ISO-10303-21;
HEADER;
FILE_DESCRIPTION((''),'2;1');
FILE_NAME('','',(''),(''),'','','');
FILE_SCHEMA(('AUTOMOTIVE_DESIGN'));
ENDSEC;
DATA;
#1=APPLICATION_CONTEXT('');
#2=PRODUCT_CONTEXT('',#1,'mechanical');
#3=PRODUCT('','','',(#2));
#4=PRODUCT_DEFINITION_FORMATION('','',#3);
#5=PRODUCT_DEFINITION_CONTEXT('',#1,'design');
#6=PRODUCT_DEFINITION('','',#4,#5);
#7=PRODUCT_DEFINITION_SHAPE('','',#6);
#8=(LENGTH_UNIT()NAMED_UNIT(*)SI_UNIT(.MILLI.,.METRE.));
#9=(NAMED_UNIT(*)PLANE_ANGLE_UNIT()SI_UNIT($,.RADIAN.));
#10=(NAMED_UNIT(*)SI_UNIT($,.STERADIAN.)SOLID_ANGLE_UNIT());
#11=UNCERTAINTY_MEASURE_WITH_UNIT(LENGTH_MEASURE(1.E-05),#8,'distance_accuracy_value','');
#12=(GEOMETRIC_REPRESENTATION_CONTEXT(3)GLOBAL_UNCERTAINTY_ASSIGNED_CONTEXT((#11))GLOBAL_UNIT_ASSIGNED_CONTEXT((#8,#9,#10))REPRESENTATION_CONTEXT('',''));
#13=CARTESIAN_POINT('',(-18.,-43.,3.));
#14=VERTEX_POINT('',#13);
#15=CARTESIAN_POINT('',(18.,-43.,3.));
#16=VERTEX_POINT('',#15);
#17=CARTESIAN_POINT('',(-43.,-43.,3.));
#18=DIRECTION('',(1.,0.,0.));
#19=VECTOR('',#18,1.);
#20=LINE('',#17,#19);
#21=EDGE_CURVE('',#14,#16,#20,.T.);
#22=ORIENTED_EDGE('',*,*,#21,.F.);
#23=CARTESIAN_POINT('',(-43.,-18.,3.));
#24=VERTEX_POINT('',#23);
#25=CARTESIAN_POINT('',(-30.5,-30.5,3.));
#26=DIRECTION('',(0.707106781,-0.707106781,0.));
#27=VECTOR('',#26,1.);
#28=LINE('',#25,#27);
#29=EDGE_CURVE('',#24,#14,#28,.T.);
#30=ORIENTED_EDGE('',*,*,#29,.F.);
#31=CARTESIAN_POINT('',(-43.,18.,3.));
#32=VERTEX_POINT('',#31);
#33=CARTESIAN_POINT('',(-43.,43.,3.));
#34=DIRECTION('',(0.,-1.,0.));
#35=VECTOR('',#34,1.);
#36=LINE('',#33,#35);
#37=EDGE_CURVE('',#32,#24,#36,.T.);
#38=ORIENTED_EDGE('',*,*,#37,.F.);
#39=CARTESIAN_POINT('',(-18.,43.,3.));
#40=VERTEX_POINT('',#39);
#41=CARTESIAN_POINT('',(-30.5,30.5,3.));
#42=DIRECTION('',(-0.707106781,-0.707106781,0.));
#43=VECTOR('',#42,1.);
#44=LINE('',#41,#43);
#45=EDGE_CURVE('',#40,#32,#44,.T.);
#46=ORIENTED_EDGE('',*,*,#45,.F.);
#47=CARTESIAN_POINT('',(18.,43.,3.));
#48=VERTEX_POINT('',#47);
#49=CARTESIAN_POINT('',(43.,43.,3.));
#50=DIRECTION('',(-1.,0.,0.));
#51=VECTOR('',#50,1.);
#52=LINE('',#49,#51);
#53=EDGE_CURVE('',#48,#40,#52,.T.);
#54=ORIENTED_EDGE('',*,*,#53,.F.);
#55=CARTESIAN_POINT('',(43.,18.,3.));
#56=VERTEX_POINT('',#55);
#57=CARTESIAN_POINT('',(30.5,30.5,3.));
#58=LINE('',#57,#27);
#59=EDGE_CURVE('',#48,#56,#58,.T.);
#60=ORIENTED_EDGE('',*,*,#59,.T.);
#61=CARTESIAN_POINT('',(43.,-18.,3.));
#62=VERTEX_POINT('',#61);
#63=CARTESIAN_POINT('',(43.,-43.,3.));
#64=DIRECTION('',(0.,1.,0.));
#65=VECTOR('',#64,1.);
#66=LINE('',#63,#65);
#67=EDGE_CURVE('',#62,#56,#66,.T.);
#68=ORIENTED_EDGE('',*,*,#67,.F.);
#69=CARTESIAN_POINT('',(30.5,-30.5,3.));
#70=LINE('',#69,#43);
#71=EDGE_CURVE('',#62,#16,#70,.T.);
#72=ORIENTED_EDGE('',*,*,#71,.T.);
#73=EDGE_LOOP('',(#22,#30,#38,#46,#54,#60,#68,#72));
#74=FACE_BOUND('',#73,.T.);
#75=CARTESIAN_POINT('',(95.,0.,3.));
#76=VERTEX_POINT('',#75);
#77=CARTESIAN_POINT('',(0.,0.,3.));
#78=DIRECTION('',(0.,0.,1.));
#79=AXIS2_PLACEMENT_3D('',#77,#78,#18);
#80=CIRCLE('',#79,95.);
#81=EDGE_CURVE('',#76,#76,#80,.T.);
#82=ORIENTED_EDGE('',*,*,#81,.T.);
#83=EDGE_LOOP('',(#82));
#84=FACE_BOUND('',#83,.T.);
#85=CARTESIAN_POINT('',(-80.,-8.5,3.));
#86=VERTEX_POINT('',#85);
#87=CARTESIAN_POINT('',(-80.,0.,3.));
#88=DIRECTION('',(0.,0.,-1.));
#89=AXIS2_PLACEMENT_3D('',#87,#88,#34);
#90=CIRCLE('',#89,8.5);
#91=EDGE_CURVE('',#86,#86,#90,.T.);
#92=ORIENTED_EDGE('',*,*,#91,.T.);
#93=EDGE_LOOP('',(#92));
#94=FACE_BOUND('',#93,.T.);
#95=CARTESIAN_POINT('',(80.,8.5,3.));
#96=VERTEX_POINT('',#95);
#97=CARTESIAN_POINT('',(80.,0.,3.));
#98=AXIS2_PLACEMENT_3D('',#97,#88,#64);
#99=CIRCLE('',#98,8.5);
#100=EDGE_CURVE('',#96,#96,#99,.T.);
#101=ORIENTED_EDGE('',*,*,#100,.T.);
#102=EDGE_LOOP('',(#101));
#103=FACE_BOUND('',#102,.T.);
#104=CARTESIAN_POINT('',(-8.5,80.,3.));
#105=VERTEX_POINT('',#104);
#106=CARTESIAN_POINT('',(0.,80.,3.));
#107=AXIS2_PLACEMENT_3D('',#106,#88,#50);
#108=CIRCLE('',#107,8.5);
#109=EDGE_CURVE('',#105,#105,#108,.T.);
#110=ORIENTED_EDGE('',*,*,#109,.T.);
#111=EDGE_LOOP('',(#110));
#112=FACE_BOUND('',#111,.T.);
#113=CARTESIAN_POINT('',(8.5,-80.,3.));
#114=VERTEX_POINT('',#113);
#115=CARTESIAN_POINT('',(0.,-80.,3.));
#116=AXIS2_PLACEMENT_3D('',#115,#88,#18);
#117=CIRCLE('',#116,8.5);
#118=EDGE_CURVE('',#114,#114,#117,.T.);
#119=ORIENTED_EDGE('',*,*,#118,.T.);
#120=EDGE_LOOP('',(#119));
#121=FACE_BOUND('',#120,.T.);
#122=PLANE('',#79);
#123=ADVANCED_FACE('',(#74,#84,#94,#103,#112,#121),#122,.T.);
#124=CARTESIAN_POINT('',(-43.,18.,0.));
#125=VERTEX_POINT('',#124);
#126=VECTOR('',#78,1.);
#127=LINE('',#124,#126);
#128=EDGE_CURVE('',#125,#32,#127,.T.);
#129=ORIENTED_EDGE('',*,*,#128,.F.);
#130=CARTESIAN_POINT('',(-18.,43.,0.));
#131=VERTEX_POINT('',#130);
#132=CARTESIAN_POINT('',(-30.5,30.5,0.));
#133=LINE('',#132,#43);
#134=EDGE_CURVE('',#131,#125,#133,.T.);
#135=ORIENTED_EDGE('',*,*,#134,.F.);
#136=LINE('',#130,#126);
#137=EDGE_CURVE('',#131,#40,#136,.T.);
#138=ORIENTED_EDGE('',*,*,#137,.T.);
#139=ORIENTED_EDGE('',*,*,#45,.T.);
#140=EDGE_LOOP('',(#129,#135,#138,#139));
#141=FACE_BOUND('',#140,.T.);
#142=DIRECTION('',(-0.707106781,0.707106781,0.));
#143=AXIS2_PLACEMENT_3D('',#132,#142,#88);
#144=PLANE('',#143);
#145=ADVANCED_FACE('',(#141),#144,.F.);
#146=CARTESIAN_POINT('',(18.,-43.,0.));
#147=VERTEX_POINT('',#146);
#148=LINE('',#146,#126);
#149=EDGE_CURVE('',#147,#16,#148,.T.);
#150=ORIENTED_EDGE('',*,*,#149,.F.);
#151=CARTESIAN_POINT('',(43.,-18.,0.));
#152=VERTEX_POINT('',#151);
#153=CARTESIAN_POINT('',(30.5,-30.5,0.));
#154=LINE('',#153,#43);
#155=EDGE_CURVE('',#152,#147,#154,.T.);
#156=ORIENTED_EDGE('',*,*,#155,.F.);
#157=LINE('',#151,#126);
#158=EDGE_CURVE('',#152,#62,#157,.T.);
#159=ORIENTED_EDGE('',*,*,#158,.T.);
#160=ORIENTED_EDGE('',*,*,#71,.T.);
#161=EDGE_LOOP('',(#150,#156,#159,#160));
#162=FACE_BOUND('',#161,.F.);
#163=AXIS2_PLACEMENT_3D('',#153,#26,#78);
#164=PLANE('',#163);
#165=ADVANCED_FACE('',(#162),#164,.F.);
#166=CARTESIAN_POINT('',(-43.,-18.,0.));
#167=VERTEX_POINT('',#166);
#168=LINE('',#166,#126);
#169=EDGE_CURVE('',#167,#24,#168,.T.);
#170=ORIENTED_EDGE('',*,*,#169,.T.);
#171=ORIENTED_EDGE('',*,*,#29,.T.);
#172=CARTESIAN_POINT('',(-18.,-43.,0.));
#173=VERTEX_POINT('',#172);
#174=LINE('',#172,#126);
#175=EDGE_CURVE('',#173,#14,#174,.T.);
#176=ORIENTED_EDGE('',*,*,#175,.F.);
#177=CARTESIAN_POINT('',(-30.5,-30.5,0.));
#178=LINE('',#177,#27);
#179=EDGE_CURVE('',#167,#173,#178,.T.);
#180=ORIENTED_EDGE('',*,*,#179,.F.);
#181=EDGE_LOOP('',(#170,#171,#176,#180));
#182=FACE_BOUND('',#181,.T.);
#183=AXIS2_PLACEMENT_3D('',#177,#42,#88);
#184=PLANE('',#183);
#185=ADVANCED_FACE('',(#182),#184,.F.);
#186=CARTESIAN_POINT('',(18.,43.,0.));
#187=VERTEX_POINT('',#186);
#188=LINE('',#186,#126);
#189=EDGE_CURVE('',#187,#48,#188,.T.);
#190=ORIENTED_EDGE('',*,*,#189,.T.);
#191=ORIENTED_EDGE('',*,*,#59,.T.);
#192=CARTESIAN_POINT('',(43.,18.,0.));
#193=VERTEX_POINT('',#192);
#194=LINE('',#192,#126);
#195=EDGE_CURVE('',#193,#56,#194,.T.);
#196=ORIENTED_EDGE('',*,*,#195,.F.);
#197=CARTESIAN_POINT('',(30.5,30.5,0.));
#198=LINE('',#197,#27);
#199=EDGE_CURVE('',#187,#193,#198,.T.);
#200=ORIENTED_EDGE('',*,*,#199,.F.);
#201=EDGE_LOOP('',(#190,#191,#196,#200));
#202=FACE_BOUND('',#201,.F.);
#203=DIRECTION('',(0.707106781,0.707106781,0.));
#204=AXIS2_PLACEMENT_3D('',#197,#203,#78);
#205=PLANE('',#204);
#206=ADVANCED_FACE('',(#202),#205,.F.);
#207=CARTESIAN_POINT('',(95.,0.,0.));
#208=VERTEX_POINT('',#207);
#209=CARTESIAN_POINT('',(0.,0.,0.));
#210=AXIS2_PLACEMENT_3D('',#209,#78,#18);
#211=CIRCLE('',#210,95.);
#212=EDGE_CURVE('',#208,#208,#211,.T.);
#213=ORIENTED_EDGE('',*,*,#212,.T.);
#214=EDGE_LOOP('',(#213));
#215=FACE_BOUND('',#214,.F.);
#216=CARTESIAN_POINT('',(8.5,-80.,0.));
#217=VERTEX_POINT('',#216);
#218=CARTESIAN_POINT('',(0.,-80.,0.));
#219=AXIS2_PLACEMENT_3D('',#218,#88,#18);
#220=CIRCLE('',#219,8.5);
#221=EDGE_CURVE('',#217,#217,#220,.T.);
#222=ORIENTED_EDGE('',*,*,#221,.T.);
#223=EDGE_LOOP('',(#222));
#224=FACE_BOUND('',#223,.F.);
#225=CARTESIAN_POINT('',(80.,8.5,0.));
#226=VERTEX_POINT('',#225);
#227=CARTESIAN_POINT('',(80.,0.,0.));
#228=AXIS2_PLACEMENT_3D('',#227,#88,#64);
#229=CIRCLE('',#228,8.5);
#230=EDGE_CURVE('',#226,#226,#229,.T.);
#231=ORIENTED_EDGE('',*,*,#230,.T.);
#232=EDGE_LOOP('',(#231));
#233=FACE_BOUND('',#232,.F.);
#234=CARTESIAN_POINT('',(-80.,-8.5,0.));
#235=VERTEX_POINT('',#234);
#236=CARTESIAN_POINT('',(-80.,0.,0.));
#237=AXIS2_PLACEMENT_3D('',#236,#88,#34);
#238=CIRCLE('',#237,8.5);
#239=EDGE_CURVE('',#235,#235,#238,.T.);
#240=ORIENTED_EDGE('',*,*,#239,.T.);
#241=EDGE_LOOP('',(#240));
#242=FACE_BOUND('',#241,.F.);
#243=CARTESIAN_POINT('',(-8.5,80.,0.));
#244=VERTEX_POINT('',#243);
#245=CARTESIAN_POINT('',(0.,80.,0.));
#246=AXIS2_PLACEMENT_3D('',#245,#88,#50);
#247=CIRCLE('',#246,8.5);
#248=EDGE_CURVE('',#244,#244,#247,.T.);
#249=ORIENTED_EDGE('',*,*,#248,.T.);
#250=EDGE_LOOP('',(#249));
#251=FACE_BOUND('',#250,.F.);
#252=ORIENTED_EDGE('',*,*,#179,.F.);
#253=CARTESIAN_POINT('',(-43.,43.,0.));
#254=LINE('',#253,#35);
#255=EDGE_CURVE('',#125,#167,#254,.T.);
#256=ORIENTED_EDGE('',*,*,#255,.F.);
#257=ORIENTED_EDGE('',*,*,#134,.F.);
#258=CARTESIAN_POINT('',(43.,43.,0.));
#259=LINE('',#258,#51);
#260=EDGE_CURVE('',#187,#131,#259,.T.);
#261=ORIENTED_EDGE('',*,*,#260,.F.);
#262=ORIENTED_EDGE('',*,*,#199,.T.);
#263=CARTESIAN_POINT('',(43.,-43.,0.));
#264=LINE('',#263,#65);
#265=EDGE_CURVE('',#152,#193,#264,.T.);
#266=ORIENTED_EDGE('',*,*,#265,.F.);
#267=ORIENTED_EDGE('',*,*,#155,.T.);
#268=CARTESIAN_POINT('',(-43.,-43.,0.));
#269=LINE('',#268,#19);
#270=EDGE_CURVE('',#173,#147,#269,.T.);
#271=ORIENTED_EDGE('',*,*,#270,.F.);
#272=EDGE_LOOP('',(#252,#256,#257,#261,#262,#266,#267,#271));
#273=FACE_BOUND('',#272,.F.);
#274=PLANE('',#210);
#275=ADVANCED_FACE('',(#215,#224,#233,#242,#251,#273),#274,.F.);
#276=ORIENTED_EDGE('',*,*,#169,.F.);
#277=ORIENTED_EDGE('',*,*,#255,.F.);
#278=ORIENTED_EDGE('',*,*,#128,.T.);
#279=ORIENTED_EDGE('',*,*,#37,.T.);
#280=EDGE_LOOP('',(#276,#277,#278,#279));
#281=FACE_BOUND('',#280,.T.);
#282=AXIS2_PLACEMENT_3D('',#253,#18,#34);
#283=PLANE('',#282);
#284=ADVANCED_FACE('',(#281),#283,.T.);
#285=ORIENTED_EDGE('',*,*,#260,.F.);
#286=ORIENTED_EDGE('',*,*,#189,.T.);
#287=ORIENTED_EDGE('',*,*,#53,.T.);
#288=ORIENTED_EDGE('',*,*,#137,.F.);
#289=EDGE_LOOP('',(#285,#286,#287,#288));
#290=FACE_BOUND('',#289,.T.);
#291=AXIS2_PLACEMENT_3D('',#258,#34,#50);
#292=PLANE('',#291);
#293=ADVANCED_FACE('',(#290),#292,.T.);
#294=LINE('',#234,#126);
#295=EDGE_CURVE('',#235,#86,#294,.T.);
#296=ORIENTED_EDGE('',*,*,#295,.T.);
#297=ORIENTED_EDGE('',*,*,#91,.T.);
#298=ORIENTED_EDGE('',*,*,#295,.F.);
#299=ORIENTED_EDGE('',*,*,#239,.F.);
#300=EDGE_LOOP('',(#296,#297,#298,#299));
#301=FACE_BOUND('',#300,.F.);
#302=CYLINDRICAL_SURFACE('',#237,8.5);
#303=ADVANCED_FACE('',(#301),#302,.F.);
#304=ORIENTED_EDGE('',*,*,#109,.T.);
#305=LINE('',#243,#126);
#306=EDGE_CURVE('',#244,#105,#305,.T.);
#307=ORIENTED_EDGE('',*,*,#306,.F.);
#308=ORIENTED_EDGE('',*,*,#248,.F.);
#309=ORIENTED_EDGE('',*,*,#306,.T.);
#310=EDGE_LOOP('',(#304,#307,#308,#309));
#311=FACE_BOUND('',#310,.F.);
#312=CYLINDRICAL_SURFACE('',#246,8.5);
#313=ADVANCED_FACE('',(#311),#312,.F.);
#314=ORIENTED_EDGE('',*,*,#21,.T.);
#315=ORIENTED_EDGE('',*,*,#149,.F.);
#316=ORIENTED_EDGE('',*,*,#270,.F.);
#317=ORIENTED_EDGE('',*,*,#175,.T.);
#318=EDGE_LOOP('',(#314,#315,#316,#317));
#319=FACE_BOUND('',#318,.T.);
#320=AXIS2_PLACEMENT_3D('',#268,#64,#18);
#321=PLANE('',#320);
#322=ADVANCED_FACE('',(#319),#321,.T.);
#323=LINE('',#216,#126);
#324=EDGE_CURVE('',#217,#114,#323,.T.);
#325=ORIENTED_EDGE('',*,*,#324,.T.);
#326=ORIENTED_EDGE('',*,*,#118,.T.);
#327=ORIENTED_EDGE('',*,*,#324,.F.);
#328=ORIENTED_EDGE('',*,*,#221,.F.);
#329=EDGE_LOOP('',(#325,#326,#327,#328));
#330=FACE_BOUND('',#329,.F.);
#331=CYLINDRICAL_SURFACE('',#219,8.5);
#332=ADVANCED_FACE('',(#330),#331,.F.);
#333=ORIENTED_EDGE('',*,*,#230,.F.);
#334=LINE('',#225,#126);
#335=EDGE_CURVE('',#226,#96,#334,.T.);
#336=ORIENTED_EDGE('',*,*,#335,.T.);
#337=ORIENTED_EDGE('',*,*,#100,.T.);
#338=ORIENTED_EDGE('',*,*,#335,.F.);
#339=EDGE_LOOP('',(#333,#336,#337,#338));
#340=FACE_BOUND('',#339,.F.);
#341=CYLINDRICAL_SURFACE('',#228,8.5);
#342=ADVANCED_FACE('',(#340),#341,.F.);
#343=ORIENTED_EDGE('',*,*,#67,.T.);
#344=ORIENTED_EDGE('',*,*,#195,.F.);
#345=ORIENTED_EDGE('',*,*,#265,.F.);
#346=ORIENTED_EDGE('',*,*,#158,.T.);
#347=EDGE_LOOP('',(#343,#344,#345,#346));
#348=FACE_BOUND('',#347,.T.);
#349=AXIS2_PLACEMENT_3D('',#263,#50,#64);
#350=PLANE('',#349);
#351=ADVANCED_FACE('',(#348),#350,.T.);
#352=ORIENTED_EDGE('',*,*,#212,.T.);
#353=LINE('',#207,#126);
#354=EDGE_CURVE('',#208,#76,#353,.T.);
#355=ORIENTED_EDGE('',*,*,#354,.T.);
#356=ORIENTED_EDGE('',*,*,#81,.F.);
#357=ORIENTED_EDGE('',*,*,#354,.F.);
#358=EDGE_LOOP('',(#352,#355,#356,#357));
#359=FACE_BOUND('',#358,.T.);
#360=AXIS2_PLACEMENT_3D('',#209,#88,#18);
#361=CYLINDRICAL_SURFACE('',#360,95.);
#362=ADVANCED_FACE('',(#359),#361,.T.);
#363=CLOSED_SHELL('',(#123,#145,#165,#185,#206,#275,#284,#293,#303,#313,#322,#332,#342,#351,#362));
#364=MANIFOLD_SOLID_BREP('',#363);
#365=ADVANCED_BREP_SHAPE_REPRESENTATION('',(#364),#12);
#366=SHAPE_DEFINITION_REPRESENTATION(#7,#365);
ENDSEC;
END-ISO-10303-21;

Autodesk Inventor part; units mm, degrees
ref_plane "YZ Plane" through (0, 0, 0) normal (1, 0, 0) x (0, 1, 0)
ref_plane "XZ Plane" through (0, 0, 0) normal (0, 1, 0) x (-1, 0, 0)
ref_plane "XY Plane" through (0, 0, 0) normal (0, 0, 1) x (1, 0, 0)
sketch "Sketch1" plane through (0, 0, 0) normal (0, 0, 1) x (1, 0, 0)
  circle A0 centre (0, 0) radius 95
  line L0 (43, 43) -> (-43, 43)
  line L1 (-43, 43) -> (-43, -43)
  line L2 (-43, -43) -> (43, -43)
  line L3 (43, -43) -> (43, 43)
  line L4 (43, 43) -> (-43, -43) construction
  line L5 (-43, 43) -> (43, -43) construction
  dimension "d157" = 190
  dimension "d158" = 86
  dimension "d159" = 86
extrude "Plate5" add sketch "Sketch1" along normal blind 3
sketch "Sketch7" plane through (0, 0, 0) normal (0, 0, -1) x (-1, 0, 0)
  circle A0 centre (0, 80) radius 8.5
  point P0 (0, 0)
  dimension "d160" = 17
  dimension "d161" = 80
extrude "Cut1" cut sketch "Sketch7" against normal blind 3
pattern_circular "Circular Pattern1" count 4 over 360 about axis through (0, 0, -10) along (0, 0, 1) of "Cut1"
chamfer "Corner Chamfer2" distance 25 angle 45 4 edges at (-43, -43, 1.5) (43, -43, 1.5) (-43, 43, 1.5) (43, 43, 1.5)
properties part number "TZS 1272 funnel FLANGE 50-90" material "Stainless Steel"
